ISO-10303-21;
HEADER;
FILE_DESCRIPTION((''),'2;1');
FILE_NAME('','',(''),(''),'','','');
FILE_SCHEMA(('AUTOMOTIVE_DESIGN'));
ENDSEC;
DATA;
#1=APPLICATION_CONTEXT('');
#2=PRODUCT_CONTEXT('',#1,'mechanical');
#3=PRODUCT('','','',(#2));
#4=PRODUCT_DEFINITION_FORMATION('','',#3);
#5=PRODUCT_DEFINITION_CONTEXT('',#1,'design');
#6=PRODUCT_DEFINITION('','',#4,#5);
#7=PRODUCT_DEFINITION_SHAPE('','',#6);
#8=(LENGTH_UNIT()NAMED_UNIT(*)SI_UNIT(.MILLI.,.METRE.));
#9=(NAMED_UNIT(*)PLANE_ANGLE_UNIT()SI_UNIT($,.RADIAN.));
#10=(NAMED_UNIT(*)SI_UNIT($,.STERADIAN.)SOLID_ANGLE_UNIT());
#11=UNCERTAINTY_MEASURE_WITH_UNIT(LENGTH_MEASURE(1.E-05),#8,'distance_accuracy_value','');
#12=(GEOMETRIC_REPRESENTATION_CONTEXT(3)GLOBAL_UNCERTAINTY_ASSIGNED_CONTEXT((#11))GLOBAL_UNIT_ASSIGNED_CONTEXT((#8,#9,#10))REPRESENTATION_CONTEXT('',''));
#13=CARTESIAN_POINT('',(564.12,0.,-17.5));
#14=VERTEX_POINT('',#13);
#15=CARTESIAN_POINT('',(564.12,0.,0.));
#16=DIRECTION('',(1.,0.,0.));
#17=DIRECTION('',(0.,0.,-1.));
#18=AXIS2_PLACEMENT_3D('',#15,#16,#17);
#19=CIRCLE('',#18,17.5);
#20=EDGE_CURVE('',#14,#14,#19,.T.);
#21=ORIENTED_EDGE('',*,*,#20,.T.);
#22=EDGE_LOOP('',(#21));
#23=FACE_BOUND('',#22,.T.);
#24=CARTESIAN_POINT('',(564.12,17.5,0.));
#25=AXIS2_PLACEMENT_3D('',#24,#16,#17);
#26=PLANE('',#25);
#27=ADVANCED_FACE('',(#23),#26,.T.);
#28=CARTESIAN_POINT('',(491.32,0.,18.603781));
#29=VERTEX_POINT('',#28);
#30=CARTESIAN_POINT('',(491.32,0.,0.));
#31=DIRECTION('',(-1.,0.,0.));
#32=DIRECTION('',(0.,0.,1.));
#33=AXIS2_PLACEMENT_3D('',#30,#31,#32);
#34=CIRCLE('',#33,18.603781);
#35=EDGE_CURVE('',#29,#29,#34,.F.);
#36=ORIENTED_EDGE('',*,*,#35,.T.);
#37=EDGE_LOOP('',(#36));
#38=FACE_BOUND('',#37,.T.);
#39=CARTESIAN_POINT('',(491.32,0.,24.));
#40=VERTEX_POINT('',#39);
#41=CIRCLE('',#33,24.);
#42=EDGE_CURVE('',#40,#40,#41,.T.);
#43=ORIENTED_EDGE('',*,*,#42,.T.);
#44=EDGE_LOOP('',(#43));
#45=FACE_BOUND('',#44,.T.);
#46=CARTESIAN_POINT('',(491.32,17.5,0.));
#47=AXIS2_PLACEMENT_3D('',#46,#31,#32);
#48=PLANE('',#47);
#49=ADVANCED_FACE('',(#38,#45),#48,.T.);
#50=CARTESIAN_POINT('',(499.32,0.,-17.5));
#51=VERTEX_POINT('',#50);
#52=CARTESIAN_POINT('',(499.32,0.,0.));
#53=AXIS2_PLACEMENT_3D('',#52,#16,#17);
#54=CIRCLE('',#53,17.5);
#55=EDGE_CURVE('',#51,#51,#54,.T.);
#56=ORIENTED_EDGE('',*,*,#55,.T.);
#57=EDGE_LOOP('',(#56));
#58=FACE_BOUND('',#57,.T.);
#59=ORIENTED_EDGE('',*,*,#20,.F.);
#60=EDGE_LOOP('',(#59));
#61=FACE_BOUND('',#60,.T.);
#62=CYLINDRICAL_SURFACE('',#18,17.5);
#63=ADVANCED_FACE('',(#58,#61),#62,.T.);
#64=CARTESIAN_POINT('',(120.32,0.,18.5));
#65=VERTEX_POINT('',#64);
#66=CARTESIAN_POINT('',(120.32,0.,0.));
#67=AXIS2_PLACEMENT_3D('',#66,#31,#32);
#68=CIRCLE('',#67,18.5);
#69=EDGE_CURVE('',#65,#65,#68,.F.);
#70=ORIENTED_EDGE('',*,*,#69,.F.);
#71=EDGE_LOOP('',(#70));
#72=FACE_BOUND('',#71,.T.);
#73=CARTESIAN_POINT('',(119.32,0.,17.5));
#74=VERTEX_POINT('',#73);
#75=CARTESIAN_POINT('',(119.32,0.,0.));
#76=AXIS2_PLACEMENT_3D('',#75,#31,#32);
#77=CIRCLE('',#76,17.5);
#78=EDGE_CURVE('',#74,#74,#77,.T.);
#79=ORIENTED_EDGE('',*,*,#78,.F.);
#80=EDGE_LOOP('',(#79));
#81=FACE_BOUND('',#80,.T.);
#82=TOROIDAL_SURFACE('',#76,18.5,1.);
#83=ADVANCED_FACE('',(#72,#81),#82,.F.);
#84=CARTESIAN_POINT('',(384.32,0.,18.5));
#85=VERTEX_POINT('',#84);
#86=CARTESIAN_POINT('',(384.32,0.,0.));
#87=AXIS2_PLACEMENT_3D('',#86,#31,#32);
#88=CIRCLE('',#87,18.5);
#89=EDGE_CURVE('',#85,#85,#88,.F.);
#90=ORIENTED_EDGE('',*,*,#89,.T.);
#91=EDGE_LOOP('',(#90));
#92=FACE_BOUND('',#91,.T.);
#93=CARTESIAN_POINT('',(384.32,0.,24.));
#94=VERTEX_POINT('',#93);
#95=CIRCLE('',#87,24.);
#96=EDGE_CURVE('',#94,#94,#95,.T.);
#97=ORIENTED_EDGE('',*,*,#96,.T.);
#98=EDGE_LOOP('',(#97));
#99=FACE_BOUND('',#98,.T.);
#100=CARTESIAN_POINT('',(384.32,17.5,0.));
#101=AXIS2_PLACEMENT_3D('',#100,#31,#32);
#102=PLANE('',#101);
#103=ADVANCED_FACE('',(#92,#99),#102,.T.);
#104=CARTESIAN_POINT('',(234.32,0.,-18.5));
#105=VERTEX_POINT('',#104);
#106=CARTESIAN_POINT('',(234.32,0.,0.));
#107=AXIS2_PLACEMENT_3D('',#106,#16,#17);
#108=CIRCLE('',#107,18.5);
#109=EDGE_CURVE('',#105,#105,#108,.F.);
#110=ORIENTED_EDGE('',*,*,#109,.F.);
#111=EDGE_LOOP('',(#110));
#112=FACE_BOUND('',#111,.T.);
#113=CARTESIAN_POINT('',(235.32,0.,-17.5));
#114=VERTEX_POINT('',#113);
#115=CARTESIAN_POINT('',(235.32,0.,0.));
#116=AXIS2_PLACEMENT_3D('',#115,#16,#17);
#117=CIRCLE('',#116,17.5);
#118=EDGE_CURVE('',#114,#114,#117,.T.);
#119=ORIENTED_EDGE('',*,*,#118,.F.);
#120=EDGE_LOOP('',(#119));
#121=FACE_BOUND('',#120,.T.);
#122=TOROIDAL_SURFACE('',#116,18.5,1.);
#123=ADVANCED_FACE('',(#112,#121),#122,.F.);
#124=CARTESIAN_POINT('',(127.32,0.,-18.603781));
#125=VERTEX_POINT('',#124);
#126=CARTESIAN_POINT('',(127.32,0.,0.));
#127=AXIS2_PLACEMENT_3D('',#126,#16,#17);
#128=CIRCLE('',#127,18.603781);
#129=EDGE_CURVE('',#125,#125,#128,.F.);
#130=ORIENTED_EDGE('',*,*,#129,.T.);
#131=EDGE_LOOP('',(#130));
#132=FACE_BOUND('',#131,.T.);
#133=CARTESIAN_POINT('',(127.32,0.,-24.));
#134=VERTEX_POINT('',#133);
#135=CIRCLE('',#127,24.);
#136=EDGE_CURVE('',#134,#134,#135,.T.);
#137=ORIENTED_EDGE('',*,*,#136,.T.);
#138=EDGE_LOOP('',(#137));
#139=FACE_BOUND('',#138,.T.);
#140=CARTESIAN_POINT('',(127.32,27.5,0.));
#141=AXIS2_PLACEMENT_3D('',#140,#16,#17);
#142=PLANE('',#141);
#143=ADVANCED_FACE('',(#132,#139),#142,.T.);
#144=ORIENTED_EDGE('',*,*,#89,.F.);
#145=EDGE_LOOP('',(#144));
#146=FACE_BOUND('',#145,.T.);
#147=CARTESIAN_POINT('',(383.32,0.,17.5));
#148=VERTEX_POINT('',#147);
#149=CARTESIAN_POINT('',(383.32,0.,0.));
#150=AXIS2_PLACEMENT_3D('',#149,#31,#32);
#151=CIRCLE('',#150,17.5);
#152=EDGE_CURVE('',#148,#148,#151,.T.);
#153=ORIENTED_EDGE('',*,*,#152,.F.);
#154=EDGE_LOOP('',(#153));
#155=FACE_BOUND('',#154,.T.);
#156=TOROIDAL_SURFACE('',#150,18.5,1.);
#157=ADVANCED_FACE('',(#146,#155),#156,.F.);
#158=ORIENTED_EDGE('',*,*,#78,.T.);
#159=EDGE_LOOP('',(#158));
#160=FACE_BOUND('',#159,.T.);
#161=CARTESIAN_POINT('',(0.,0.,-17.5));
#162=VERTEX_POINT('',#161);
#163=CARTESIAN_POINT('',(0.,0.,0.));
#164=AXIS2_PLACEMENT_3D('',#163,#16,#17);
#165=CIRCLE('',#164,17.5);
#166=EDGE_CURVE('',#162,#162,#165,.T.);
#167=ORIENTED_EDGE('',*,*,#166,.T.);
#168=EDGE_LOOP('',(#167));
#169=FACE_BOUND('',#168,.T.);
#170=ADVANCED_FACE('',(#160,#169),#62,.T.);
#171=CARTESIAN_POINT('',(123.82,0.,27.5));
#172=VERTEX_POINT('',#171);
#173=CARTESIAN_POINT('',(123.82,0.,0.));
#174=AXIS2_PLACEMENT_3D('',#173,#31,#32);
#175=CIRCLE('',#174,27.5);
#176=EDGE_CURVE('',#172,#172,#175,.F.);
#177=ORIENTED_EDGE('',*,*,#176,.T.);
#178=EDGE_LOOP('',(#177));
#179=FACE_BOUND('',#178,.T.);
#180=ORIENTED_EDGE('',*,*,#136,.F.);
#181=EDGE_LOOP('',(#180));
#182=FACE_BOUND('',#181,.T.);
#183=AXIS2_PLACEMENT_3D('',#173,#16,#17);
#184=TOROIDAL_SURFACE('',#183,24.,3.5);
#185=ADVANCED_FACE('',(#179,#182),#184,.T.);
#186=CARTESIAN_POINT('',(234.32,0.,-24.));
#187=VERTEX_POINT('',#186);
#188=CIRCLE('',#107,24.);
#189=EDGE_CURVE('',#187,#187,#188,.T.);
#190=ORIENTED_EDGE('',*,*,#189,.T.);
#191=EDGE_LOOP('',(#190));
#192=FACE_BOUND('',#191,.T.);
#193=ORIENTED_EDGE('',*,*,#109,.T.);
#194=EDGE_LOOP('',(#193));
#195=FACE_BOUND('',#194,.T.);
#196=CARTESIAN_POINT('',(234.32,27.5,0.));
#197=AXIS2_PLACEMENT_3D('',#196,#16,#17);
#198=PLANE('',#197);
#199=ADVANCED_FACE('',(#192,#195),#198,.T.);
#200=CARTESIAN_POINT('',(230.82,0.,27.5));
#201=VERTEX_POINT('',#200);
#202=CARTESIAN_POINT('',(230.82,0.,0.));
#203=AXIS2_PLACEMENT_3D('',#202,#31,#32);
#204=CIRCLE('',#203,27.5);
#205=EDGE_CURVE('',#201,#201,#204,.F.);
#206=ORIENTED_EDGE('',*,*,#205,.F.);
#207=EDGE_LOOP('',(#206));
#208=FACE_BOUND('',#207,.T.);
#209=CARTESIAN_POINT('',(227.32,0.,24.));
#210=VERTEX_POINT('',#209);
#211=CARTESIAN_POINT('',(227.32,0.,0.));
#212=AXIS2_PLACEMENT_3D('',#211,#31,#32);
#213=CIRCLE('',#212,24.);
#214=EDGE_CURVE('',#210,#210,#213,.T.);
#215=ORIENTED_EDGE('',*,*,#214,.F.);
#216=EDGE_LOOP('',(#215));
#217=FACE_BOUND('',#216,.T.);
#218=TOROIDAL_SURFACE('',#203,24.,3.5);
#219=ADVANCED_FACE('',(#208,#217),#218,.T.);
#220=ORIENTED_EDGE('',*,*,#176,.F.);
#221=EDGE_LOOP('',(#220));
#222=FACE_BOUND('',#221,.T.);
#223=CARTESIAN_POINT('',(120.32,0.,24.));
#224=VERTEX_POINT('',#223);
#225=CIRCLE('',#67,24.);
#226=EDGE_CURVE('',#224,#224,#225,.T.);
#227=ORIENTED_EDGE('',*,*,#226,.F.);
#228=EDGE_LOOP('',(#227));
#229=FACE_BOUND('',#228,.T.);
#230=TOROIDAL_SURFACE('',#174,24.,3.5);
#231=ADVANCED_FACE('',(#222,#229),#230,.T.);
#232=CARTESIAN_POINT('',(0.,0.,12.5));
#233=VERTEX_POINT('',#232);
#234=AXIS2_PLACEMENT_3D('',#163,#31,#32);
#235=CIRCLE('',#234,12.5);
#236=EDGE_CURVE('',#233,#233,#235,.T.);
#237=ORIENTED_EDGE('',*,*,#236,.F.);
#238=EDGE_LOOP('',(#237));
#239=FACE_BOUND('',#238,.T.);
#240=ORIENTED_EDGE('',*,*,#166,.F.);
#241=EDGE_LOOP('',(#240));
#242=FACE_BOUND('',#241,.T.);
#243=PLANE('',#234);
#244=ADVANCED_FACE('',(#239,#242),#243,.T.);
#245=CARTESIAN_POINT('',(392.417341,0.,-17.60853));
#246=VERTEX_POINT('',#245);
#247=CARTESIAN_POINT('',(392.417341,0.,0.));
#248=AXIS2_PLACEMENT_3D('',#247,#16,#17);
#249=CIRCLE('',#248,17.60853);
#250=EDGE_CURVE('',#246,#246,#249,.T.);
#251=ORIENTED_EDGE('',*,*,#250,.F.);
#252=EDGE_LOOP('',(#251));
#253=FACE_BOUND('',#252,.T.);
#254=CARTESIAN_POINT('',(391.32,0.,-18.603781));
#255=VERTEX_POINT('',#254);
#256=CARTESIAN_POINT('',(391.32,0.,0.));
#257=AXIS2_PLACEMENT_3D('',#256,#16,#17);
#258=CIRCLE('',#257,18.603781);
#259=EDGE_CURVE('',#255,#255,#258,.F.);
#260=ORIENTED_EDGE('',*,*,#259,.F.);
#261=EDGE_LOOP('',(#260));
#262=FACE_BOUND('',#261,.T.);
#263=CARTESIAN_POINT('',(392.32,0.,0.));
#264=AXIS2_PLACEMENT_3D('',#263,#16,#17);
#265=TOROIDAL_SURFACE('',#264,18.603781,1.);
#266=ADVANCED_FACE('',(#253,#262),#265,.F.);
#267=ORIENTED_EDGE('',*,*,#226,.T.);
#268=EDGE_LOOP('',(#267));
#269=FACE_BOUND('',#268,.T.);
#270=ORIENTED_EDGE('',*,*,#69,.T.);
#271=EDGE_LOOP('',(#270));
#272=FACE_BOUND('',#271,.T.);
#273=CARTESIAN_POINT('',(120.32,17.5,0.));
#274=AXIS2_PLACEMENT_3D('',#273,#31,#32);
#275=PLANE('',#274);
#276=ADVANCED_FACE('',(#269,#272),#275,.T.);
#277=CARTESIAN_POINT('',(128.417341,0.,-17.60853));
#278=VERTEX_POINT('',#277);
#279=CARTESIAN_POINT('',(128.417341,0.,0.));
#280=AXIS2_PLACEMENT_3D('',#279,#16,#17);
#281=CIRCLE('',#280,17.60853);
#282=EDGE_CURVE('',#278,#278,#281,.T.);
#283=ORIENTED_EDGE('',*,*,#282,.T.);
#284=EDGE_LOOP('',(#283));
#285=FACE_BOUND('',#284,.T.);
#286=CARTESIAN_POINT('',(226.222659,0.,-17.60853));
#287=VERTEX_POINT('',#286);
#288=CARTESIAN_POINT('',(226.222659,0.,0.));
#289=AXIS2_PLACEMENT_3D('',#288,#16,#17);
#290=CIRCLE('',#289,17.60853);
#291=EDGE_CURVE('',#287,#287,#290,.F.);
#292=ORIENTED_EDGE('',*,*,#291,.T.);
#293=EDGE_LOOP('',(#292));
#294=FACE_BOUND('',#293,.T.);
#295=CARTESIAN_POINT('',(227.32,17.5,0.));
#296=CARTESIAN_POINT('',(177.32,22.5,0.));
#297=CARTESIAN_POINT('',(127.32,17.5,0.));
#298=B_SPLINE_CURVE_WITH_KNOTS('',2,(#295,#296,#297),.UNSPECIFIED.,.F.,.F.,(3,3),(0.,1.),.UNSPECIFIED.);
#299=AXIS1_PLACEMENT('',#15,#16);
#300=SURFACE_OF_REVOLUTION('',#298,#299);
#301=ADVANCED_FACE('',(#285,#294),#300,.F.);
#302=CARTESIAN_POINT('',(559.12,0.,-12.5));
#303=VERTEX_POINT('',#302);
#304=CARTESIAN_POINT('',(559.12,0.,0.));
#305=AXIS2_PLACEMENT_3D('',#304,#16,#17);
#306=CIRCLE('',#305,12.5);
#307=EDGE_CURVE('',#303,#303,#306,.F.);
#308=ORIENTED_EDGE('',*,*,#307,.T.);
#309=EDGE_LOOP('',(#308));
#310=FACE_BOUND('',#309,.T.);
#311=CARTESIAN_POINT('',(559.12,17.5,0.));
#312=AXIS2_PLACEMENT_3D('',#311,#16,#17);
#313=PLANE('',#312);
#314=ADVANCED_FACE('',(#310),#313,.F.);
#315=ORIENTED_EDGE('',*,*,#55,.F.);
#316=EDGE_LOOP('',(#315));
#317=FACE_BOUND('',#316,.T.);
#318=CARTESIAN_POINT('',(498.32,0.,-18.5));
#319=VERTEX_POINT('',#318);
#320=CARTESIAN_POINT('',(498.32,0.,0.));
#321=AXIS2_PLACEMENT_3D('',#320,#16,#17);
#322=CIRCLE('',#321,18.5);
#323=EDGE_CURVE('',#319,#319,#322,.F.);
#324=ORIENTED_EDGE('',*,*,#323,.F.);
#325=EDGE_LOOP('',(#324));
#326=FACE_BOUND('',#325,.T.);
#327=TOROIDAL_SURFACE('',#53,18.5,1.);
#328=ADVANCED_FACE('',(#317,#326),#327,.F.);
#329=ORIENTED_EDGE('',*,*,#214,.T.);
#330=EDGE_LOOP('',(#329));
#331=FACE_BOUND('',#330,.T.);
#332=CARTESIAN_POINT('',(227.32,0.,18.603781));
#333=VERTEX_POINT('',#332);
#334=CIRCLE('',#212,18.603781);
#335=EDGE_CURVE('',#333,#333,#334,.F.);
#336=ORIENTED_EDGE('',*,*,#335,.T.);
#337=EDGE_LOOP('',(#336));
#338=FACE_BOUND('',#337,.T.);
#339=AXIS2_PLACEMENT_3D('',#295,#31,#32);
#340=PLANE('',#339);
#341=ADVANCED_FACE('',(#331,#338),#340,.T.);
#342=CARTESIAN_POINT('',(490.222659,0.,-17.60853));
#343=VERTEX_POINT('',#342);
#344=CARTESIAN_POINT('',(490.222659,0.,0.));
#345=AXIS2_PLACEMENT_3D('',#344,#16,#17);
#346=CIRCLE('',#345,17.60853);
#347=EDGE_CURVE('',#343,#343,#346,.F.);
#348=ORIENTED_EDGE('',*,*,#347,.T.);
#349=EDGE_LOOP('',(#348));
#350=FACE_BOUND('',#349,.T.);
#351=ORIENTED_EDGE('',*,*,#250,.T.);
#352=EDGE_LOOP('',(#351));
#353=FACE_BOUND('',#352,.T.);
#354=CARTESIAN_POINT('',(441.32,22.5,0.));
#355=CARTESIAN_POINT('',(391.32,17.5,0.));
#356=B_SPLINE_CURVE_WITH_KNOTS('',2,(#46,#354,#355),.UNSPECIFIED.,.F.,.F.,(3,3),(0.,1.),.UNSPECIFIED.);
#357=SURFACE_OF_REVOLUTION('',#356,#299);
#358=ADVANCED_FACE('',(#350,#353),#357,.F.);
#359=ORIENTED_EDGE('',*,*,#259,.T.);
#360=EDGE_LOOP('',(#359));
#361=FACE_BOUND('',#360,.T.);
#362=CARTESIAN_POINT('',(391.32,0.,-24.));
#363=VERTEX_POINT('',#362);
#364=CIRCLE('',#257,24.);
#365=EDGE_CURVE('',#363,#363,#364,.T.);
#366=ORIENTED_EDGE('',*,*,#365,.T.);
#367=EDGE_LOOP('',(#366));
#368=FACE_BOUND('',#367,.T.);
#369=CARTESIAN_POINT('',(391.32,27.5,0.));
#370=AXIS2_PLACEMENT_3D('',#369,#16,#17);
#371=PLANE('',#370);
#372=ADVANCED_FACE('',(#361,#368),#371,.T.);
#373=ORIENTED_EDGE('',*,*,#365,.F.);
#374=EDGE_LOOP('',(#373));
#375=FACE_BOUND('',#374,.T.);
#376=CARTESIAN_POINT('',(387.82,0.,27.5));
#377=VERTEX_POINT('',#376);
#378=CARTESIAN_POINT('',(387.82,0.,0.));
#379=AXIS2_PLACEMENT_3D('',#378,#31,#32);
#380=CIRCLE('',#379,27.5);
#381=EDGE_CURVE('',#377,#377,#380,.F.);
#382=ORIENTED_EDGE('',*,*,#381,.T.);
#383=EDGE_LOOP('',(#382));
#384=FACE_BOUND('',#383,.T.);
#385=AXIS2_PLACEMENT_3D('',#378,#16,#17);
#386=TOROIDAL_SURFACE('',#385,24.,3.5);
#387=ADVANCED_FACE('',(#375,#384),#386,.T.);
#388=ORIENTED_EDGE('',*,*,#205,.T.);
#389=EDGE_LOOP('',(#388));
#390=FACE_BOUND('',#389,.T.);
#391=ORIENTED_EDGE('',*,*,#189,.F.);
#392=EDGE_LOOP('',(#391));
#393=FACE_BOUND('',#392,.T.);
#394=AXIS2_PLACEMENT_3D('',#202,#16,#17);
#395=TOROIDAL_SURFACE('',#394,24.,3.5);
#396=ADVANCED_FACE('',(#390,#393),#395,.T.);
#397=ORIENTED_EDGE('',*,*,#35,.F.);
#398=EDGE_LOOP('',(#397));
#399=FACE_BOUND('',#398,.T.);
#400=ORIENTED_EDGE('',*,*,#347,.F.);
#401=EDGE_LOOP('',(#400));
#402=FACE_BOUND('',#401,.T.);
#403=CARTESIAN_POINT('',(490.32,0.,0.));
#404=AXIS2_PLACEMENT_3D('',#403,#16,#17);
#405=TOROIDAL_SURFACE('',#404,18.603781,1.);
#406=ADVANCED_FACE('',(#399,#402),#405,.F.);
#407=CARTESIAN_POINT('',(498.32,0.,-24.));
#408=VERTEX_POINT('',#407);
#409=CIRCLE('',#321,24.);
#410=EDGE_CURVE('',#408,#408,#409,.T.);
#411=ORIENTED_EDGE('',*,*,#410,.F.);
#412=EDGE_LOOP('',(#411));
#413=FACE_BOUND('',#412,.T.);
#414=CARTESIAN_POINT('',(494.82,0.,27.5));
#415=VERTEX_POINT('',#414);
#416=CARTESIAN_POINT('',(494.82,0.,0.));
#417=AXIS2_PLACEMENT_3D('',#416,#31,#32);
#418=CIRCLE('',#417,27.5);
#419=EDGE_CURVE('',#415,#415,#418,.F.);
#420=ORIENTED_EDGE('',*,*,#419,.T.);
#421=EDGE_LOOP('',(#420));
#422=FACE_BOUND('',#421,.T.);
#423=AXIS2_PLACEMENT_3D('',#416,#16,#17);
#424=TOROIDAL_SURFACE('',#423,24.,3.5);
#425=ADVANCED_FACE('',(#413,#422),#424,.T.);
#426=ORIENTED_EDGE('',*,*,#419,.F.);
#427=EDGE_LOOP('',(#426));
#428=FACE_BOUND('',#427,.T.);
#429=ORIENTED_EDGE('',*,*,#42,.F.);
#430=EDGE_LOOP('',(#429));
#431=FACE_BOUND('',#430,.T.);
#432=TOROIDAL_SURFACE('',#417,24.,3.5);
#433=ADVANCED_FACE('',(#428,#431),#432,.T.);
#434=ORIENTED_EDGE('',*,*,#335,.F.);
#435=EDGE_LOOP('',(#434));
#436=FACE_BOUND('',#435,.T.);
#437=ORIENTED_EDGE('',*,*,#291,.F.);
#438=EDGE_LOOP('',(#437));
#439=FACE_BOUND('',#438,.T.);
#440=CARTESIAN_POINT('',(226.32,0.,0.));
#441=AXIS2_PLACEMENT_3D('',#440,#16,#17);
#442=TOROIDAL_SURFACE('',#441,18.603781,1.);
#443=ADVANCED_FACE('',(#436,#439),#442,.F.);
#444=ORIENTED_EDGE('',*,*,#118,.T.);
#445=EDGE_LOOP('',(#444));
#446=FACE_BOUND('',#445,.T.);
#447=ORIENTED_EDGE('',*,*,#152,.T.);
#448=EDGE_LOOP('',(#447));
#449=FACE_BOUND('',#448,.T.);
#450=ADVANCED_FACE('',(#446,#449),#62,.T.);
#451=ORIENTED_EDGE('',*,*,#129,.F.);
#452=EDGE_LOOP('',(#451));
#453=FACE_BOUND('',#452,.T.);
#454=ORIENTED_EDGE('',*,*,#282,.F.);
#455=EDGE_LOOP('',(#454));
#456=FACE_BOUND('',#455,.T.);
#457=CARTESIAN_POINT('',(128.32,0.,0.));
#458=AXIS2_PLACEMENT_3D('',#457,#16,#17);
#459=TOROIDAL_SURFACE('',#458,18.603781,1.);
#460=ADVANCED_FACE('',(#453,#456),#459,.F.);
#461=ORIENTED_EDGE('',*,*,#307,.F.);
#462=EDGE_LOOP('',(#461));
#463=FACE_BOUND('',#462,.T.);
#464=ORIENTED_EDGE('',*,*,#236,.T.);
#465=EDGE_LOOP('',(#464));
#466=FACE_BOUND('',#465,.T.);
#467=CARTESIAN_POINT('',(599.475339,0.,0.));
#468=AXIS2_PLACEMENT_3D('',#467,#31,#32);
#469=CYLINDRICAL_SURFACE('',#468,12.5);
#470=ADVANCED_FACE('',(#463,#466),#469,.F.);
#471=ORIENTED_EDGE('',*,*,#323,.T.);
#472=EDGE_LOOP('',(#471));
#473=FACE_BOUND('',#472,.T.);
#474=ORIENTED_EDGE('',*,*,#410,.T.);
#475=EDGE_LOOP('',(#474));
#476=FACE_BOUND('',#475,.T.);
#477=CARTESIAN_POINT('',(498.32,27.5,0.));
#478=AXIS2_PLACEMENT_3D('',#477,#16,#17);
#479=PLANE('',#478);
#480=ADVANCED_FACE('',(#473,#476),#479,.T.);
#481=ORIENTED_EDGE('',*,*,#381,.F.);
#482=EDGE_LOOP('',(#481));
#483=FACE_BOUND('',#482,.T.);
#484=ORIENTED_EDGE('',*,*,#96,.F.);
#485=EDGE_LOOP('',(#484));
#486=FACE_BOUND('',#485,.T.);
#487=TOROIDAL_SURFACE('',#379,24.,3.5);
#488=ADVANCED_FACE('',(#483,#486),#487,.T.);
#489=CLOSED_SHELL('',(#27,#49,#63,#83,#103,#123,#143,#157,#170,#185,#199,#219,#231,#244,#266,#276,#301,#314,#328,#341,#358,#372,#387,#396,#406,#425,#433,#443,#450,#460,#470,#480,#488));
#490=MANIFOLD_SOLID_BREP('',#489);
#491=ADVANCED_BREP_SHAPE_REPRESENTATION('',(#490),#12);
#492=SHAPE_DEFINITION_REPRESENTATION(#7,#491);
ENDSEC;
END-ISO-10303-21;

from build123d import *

# Parameters (mm, degrees)
FILLET4_R           = 3.5
FILLET5_R           = 1
SKETCH3_R           = 12.5
BOSS_EXTRUDE1_DEPTH = 564.12
SKETCH3_2_R         = 12.5
CUT_EXTRUDE2_DEPTH  = 559.12


with BuildPart() as part:
    # Sketch1 → Revolve1 (revolve)
    with BuildSketch(Plane.XY, mode=Mode.PRIVATE) as revolve1_sk:
        with BuildLine():
            Line((0, 0), (0, 17.5))
            Line((0, 17.5), (120.32, 17.5))
            Line((120.32, 17.5), (120.32, 27.5))
            Line((120.32, 27.5), (127.32, 27.5))
            Line((127.32, 27.5), (127.32, 17.5))
            add(Edge.make_bspline(
                [(127.32, 17.5), (177.32, 22.5), (227.32, 17.5)],
                knots=[0, 0, 0, 1, 1, 1], degree=2))
            Line((227.32, 17.5), (227.32, 27.5))
            Line((227.32, 27.5), (234.32, 27.5))
            Line((234.32, 27.5), (234.32, 17.5))
            Line((234.32, 17.5), (384.32, 17.5))
            Line((384.32, 17.5), (384.32, 27.5))
            Line((384.32, 27.5), (391.32, 27.5))
            Line((391.32, 27.5), (391.32, 17.5))
            add(Edge.make_bspline(
                [(391.32, 17.5), (441.32, 22.5), (491.32, 17.5)],
                knots=[0, 0, 0, 1, 1, 1], degree=2))
            Line((491.32, 17.5), (491.32, 27.5))
            Line((491.32, 27.5), (498.32, 27.5))
            Line((498.32, 27.5), (498.32, 17.5))
            Line((498.32, 17.5), (564.12, 17.5))
            Line((564.12, 17.5), (564.12, 0))
            Line((564.12, 0), (0, 0))
        make_face()
    revolve(revolve1_sk.sketch.rotate(Axis((564.12, 0, 0), (-1, 0, 0)), 90), axis=Axis((564.12, 0, 0), (-1, 0, 0)))

    # Fillet4
    fillet4_edges = [part.edges().sort_by_distance(p)[0] for p in [
        (120.32, 0, 27.5),
        (127.32, 0, 27.5),
        (227.32, 0, 27.5),
        (234.32, 0, 27.5),
        (384.32, 0, 27.5),
        (391.32, 0, 27.5),
        (491.32, 0, 27.5),
        (498.32, 0, 27.5),
    ]]
    fillet(fillet4_edges, radius=FILLET4_R - 0.0001)  # a hair under: the kernel refuses the full size

    # Fillet5
    fillet5_edges = [part.edges().sort_by_distance(p)[0] for p in [
        (120.32, 0, 17.5),
        (127.32, 0, 17.5),
        (227.32, 0, 17.5),
        (234.32, 0, 17.5),
        (384.32, 0, 17.5),
        (391.32, 0, 17.5),
        (491.32, 0, 17.5),
        (498.32, 0, 17.5),
    ]]
    fillet(fillet5_edges, radius=FILLET5_R)

    # Sketch3 → Boss-Extrude1 (add, through all)
    with BuildSketch(Plane.ZY):
        Circle(SKETCH3_R)
    extrude(amount=-BOSS_EXTRUDE1_DEPTH)

    # Sketch3<2> → Cut-Extrude2 (cut)
    with BuildSketch(Plane.ZY):
        Circle(SKETCH3_2_R)
    extrude(amount=-CUT_EXTRUDE2_DEPTH, mode=Mode.SUBTRACT)


solid = part.part
